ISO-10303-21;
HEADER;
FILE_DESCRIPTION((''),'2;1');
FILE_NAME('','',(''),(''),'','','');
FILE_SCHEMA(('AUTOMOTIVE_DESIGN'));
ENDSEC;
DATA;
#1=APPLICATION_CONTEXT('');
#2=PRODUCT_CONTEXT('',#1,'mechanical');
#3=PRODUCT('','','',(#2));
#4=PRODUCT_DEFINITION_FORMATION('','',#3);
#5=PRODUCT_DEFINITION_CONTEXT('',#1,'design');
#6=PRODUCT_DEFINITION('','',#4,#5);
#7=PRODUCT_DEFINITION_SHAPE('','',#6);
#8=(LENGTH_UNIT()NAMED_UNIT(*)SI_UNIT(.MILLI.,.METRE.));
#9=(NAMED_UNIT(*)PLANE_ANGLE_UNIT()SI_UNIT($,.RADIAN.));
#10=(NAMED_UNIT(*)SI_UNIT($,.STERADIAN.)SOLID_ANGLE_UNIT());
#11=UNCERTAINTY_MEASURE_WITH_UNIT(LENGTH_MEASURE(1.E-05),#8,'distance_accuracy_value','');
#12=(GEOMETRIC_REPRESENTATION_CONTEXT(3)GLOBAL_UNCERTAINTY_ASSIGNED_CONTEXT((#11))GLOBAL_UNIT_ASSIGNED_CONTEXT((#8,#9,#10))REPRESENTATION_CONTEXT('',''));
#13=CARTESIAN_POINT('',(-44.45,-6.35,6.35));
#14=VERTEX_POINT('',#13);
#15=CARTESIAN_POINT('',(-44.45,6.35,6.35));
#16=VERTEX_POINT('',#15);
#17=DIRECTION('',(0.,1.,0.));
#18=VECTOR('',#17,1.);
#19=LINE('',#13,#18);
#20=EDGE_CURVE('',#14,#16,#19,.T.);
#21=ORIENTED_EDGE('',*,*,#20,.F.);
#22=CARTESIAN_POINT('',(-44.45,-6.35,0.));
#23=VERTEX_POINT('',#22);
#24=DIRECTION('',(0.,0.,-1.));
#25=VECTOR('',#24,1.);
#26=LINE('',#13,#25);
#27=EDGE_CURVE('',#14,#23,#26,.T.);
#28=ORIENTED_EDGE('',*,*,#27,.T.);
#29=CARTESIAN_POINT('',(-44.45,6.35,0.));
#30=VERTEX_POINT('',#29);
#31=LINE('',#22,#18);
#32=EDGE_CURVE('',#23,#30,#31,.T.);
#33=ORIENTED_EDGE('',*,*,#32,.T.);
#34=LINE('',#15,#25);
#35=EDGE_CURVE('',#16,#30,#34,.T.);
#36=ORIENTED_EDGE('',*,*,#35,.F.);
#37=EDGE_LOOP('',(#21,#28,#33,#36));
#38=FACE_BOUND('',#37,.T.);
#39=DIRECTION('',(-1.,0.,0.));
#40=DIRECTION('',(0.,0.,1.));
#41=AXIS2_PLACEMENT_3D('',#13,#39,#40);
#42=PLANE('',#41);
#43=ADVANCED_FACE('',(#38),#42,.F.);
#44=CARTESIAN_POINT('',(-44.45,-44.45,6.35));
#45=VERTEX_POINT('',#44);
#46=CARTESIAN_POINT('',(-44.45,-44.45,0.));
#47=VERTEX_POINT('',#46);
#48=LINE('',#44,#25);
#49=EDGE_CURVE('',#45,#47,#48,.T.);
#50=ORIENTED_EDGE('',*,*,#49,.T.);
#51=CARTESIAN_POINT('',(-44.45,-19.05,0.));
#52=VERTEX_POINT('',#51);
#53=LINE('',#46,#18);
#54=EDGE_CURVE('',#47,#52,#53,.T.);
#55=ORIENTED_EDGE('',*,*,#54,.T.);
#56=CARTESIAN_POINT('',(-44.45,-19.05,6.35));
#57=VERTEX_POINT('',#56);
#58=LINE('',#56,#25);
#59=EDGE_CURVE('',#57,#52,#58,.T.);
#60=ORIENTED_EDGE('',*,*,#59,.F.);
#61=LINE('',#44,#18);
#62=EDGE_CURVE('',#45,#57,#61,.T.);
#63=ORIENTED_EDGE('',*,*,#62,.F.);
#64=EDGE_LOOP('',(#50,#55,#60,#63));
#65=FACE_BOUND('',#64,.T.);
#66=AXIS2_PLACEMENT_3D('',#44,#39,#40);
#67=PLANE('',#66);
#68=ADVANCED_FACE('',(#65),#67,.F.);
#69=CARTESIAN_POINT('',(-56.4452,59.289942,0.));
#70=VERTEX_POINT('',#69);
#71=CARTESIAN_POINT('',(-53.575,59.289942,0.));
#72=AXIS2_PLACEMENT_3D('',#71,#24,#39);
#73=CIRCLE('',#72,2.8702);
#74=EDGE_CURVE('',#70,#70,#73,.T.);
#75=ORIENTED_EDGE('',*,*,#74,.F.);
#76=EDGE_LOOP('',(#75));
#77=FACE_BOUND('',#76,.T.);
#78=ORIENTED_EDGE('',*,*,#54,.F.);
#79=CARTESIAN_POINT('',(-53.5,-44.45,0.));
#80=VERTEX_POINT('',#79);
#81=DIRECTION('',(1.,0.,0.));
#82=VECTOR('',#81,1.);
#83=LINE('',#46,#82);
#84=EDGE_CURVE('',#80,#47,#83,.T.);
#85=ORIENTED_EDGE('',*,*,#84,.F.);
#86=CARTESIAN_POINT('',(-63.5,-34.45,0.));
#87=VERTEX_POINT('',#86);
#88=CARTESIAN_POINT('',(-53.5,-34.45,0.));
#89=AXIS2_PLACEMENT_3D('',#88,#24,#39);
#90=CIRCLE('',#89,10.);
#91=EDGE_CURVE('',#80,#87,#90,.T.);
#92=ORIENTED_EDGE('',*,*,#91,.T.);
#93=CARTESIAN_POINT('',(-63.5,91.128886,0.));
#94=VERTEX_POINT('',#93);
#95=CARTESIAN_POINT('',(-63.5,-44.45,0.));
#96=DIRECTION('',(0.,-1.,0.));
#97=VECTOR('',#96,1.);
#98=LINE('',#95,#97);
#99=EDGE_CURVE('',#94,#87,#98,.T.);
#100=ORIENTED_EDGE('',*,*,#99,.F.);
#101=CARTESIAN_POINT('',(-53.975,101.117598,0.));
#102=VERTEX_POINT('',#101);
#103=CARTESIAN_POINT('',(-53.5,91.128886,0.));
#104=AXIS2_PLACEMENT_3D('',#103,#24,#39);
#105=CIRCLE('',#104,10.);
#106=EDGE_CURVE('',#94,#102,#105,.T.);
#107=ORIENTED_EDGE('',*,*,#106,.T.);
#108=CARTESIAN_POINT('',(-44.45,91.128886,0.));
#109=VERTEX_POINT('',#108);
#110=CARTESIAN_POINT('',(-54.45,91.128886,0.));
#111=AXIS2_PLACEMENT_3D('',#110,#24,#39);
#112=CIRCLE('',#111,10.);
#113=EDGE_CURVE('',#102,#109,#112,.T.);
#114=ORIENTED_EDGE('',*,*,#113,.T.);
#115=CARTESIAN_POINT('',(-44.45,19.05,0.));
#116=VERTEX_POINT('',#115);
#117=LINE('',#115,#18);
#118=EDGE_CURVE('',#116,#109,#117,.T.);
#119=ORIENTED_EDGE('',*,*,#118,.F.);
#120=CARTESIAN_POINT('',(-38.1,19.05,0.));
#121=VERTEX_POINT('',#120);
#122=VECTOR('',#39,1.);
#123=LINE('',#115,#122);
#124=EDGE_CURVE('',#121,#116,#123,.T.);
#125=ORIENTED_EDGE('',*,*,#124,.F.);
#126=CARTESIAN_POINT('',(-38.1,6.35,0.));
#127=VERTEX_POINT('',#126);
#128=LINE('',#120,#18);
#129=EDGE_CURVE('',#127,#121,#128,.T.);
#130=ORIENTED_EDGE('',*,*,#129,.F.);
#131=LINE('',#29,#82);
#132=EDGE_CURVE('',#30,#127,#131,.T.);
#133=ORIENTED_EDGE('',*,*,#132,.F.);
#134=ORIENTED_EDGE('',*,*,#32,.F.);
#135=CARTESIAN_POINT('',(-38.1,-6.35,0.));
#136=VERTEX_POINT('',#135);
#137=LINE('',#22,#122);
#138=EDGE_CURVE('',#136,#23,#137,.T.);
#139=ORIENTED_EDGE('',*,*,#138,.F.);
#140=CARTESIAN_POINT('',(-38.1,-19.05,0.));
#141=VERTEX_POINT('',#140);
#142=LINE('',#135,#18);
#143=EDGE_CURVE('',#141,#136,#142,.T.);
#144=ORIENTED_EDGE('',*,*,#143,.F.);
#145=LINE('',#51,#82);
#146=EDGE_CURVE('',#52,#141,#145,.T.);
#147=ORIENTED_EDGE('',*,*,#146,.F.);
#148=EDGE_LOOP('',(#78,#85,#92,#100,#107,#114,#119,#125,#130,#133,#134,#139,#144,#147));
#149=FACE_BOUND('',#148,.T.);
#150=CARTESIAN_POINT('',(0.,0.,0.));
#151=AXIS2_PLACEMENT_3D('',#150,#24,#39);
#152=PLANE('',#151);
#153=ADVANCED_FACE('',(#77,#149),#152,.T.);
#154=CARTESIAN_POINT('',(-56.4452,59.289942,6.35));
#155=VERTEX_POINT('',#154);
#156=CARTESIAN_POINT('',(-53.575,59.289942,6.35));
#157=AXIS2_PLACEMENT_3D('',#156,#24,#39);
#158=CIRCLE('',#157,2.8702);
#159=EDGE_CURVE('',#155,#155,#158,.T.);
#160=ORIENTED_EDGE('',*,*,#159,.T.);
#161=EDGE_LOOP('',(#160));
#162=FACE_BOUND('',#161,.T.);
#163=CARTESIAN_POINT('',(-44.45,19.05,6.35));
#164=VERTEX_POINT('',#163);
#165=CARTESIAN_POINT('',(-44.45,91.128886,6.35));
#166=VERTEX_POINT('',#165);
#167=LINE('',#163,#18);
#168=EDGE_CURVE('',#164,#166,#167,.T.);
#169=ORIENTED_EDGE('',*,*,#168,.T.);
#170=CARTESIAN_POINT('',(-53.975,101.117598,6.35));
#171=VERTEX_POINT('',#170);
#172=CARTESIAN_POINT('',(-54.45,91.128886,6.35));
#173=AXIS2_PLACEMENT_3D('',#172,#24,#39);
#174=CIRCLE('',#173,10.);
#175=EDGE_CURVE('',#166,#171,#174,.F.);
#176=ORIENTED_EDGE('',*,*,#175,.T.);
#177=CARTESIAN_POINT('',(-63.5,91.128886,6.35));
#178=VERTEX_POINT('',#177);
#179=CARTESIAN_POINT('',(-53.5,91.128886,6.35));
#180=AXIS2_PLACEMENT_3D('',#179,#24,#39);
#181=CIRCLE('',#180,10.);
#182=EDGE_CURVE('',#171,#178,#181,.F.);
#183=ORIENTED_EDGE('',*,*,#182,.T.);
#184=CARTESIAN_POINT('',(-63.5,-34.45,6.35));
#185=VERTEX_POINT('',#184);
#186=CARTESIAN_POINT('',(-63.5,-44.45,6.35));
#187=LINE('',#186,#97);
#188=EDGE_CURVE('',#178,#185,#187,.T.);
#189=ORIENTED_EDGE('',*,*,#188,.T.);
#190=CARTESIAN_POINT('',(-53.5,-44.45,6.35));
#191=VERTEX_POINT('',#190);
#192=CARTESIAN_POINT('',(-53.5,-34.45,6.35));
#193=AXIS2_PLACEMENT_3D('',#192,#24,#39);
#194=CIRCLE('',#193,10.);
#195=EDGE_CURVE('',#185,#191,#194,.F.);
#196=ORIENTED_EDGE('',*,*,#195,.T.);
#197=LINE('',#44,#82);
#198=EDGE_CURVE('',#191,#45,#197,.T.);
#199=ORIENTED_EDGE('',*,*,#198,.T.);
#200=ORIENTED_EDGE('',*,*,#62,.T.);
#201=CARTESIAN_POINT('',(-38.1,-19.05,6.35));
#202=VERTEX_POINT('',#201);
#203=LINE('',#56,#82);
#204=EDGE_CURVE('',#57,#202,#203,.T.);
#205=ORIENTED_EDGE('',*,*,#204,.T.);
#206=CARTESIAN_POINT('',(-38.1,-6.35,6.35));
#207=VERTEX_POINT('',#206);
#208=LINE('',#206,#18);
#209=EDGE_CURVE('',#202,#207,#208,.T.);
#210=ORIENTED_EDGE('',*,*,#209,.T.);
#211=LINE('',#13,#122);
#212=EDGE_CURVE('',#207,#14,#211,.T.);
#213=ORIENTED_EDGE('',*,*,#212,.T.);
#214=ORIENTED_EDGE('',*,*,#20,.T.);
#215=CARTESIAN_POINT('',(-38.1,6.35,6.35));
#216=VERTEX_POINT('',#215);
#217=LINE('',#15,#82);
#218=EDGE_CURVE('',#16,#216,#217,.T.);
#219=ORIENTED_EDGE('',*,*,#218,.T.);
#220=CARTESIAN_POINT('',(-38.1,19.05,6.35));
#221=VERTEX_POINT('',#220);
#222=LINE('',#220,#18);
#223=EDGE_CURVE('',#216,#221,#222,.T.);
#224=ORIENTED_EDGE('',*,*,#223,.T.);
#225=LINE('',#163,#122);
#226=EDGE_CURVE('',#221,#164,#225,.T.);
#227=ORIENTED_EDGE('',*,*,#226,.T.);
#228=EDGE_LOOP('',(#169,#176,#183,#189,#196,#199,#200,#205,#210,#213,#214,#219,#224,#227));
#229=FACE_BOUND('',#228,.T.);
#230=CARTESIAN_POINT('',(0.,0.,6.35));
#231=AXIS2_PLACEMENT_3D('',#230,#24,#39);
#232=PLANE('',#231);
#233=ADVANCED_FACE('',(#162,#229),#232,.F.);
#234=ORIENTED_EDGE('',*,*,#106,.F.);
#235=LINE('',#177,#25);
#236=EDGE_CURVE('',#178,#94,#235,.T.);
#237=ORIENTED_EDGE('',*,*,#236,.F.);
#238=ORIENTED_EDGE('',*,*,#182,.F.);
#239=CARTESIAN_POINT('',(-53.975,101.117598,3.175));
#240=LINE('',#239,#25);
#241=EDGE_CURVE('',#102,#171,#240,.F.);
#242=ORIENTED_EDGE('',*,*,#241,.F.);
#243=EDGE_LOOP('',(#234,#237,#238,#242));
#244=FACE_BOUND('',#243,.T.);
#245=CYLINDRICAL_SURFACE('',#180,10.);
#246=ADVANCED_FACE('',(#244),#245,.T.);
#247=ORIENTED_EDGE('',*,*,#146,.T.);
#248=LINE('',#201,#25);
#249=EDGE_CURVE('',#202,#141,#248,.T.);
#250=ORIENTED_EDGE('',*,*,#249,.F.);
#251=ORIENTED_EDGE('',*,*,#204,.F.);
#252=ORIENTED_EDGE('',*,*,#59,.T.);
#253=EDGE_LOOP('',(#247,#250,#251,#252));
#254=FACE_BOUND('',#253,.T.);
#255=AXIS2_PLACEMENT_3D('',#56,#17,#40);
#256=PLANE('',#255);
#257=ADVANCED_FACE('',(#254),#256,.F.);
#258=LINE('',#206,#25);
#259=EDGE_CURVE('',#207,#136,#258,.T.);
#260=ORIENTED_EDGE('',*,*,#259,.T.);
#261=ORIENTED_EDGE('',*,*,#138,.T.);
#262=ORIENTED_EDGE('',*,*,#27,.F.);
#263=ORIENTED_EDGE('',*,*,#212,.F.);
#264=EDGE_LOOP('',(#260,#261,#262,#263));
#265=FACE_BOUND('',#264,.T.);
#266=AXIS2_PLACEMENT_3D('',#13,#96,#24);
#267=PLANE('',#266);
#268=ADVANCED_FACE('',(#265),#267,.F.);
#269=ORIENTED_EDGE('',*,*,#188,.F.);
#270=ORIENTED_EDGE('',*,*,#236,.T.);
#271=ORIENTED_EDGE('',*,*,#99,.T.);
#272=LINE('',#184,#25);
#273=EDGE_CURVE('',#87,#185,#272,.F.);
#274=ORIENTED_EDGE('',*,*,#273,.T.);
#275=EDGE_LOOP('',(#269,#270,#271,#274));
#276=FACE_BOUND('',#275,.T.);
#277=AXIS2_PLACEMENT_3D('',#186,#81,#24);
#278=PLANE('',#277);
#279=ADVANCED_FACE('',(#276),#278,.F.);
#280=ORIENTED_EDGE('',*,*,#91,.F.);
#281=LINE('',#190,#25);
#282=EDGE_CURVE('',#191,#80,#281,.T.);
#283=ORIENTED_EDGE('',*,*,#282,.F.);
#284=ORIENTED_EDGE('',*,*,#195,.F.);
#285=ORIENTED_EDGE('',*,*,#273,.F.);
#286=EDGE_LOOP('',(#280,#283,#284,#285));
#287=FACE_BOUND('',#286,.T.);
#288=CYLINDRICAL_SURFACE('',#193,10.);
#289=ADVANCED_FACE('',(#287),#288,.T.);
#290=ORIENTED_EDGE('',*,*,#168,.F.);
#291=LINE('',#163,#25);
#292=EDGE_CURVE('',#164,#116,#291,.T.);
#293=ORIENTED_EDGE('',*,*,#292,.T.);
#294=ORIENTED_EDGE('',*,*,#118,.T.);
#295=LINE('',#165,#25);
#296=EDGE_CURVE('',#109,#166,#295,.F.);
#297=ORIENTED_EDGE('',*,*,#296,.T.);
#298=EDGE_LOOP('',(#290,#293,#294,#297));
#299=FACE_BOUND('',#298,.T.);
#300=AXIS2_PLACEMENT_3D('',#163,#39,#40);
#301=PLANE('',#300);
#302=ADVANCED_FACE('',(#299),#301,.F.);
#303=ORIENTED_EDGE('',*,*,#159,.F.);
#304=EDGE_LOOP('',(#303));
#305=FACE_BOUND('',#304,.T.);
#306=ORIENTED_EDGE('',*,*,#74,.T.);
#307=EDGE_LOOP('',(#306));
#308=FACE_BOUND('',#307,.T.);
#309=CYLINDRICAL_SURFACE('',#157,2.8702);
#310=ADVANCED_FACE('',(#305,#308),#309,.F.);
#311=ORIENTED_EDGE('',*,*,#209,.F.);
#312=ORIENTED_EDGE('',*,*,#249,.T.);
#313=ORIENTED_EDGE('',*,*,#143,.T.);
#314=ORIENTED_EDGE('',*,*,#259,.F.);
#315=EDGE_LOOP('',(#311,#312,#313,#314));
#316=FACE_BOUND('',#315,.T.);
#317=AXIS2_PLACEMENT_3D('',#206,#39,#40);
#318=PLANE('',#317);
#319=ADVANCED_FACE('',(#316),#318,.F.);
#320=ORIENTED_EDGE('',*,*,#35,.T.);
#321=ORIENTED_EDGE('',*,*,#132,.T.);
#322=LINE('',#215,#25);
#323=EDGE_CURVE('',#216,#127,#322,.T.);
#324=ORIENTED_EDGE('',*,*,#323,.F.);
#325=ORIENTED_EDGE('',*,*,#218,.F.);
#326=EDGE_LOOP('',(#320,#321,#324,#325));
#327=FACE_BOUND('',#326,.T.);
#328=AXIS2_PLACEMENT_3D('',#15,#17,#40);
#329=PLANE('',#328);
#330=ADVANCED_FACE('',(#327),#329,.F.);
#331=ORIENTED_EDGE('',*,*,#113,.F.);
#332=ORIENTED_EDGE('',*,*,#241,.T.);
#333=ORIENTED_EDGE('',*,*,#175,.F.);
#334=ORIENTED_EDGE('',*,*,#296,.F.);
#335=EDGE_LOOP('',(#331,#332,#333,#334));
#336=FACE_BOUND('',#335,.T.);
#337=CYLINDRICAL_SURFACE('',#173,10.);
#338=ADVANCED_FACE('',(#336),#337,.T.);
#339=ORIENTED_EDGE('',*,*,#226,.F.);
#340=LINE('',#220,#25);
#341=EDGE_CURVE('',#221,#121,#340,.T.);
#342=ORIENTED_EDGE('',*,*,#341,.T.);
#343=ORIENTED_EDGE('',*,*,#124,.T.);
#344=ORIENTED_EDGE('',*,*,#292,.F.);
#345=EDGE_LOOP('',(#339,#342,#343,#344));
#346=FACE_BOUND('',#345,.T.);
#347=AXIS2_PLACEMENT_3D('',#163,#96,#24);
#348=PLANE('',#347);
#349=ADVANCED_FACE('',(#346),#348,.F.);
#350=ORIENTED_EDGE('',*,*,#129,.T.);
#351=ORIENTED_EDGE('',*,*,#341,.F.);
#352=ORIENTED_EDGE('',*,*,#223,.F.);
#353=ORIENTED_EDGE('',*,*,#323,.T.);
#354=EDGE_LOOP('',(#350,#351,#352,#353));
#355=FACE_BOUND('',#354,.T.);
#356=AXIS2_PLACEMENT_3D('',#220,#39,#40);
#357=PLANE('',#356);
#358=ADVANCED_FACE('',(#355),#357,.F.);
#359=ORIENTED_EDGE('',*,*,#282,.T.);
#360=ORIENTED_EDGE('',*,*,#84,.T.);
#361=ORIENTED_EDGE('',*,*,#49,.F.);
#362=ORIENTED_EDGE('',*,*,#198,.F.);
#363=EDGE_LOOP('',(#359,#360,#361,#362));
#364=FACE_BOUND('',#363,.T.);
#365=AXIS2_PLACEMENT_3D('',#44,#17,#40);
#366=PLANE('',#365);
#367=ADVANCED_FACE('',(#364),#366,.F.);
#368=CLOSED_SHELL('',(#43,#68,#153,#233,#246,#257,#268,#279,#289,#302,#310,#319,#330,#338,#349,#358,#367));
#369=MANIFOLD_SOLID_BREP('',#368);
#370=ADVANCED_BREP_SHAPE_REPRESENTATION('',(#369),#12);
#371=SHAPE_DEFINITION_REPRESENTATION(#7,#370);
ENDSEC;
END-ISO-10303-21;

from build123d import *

# Parameters (mm, degrees)
BOSS_EXTRUDE1_DEPTH = 6.35
FILLET1_R           = 10
SKETCH2_R           = 2.8702
CUT_EXTRUDE3_DEPTH  = 120.57148989


with BuildPart() as part:
    # Sketch1 → Boss-Extrude1 (new body)
    with BuildSketch(Plane.XY):
        Polygon((-44.45, 19.05), (-44.45, 101.128885963), (-63.5, 101.128885963), (-63.5, -44.45), (-44.45, -44.45), (-44.45, -19.05), (-38.1, -19.05), (-38.1, -6.35), (-44.45, -6.35), (-44.45, 6.35), (-38.1, 6.35), (-38.1, 19.05), align=None)
    extrude(amount=BOSS_EXTRUDE1_DEPTH)

    # Fillet1
    # the kernel refuses this fillet: 10 mm, written as the material it takes off along each edge
    with BuildSketch(Plane(origin=(-63.5, -44.45, -25), x_dir=(0, 1, 0), z_dir=(0, 0, 1)), Plane(origin=(-44.45, 101.128885963, -25), x_dir=(0, -1, 0), z_dir=(0, 0, 1)), Plane(origin=(-63.5, 101.128885963, -25), x_dir=(1, 0, 0), z_dir=(0, 0, 1))) as fillet1_piece_1:
        with BuildLine():
            CenterArc((FILLET1_R, -FILLET1_R), FILLET1_R, 90, 90)
            Line((0, -FILLET1_R), (0, 0))
            Line((0, 0), (FILLET1_R, 0))
        make_face()
    extrude(amount=56.35, mode=Mode.SUBTRACT)

    # Sketch2 → Cut-Extrude3 (cut, through all)
    with BuildSketch(Plane(origin=(0, 0, 0), x_dir=(-1, 0, 0), z_dir=(0, 0, -1))):
        with Locations((53.575, 59.289941788)):
            Circle(SKETCH2_R)
    extrude(amount=-CUT_EXTRUDE3_DEPTH, mode=Mode.SUBTRACT)


solid = part.part
